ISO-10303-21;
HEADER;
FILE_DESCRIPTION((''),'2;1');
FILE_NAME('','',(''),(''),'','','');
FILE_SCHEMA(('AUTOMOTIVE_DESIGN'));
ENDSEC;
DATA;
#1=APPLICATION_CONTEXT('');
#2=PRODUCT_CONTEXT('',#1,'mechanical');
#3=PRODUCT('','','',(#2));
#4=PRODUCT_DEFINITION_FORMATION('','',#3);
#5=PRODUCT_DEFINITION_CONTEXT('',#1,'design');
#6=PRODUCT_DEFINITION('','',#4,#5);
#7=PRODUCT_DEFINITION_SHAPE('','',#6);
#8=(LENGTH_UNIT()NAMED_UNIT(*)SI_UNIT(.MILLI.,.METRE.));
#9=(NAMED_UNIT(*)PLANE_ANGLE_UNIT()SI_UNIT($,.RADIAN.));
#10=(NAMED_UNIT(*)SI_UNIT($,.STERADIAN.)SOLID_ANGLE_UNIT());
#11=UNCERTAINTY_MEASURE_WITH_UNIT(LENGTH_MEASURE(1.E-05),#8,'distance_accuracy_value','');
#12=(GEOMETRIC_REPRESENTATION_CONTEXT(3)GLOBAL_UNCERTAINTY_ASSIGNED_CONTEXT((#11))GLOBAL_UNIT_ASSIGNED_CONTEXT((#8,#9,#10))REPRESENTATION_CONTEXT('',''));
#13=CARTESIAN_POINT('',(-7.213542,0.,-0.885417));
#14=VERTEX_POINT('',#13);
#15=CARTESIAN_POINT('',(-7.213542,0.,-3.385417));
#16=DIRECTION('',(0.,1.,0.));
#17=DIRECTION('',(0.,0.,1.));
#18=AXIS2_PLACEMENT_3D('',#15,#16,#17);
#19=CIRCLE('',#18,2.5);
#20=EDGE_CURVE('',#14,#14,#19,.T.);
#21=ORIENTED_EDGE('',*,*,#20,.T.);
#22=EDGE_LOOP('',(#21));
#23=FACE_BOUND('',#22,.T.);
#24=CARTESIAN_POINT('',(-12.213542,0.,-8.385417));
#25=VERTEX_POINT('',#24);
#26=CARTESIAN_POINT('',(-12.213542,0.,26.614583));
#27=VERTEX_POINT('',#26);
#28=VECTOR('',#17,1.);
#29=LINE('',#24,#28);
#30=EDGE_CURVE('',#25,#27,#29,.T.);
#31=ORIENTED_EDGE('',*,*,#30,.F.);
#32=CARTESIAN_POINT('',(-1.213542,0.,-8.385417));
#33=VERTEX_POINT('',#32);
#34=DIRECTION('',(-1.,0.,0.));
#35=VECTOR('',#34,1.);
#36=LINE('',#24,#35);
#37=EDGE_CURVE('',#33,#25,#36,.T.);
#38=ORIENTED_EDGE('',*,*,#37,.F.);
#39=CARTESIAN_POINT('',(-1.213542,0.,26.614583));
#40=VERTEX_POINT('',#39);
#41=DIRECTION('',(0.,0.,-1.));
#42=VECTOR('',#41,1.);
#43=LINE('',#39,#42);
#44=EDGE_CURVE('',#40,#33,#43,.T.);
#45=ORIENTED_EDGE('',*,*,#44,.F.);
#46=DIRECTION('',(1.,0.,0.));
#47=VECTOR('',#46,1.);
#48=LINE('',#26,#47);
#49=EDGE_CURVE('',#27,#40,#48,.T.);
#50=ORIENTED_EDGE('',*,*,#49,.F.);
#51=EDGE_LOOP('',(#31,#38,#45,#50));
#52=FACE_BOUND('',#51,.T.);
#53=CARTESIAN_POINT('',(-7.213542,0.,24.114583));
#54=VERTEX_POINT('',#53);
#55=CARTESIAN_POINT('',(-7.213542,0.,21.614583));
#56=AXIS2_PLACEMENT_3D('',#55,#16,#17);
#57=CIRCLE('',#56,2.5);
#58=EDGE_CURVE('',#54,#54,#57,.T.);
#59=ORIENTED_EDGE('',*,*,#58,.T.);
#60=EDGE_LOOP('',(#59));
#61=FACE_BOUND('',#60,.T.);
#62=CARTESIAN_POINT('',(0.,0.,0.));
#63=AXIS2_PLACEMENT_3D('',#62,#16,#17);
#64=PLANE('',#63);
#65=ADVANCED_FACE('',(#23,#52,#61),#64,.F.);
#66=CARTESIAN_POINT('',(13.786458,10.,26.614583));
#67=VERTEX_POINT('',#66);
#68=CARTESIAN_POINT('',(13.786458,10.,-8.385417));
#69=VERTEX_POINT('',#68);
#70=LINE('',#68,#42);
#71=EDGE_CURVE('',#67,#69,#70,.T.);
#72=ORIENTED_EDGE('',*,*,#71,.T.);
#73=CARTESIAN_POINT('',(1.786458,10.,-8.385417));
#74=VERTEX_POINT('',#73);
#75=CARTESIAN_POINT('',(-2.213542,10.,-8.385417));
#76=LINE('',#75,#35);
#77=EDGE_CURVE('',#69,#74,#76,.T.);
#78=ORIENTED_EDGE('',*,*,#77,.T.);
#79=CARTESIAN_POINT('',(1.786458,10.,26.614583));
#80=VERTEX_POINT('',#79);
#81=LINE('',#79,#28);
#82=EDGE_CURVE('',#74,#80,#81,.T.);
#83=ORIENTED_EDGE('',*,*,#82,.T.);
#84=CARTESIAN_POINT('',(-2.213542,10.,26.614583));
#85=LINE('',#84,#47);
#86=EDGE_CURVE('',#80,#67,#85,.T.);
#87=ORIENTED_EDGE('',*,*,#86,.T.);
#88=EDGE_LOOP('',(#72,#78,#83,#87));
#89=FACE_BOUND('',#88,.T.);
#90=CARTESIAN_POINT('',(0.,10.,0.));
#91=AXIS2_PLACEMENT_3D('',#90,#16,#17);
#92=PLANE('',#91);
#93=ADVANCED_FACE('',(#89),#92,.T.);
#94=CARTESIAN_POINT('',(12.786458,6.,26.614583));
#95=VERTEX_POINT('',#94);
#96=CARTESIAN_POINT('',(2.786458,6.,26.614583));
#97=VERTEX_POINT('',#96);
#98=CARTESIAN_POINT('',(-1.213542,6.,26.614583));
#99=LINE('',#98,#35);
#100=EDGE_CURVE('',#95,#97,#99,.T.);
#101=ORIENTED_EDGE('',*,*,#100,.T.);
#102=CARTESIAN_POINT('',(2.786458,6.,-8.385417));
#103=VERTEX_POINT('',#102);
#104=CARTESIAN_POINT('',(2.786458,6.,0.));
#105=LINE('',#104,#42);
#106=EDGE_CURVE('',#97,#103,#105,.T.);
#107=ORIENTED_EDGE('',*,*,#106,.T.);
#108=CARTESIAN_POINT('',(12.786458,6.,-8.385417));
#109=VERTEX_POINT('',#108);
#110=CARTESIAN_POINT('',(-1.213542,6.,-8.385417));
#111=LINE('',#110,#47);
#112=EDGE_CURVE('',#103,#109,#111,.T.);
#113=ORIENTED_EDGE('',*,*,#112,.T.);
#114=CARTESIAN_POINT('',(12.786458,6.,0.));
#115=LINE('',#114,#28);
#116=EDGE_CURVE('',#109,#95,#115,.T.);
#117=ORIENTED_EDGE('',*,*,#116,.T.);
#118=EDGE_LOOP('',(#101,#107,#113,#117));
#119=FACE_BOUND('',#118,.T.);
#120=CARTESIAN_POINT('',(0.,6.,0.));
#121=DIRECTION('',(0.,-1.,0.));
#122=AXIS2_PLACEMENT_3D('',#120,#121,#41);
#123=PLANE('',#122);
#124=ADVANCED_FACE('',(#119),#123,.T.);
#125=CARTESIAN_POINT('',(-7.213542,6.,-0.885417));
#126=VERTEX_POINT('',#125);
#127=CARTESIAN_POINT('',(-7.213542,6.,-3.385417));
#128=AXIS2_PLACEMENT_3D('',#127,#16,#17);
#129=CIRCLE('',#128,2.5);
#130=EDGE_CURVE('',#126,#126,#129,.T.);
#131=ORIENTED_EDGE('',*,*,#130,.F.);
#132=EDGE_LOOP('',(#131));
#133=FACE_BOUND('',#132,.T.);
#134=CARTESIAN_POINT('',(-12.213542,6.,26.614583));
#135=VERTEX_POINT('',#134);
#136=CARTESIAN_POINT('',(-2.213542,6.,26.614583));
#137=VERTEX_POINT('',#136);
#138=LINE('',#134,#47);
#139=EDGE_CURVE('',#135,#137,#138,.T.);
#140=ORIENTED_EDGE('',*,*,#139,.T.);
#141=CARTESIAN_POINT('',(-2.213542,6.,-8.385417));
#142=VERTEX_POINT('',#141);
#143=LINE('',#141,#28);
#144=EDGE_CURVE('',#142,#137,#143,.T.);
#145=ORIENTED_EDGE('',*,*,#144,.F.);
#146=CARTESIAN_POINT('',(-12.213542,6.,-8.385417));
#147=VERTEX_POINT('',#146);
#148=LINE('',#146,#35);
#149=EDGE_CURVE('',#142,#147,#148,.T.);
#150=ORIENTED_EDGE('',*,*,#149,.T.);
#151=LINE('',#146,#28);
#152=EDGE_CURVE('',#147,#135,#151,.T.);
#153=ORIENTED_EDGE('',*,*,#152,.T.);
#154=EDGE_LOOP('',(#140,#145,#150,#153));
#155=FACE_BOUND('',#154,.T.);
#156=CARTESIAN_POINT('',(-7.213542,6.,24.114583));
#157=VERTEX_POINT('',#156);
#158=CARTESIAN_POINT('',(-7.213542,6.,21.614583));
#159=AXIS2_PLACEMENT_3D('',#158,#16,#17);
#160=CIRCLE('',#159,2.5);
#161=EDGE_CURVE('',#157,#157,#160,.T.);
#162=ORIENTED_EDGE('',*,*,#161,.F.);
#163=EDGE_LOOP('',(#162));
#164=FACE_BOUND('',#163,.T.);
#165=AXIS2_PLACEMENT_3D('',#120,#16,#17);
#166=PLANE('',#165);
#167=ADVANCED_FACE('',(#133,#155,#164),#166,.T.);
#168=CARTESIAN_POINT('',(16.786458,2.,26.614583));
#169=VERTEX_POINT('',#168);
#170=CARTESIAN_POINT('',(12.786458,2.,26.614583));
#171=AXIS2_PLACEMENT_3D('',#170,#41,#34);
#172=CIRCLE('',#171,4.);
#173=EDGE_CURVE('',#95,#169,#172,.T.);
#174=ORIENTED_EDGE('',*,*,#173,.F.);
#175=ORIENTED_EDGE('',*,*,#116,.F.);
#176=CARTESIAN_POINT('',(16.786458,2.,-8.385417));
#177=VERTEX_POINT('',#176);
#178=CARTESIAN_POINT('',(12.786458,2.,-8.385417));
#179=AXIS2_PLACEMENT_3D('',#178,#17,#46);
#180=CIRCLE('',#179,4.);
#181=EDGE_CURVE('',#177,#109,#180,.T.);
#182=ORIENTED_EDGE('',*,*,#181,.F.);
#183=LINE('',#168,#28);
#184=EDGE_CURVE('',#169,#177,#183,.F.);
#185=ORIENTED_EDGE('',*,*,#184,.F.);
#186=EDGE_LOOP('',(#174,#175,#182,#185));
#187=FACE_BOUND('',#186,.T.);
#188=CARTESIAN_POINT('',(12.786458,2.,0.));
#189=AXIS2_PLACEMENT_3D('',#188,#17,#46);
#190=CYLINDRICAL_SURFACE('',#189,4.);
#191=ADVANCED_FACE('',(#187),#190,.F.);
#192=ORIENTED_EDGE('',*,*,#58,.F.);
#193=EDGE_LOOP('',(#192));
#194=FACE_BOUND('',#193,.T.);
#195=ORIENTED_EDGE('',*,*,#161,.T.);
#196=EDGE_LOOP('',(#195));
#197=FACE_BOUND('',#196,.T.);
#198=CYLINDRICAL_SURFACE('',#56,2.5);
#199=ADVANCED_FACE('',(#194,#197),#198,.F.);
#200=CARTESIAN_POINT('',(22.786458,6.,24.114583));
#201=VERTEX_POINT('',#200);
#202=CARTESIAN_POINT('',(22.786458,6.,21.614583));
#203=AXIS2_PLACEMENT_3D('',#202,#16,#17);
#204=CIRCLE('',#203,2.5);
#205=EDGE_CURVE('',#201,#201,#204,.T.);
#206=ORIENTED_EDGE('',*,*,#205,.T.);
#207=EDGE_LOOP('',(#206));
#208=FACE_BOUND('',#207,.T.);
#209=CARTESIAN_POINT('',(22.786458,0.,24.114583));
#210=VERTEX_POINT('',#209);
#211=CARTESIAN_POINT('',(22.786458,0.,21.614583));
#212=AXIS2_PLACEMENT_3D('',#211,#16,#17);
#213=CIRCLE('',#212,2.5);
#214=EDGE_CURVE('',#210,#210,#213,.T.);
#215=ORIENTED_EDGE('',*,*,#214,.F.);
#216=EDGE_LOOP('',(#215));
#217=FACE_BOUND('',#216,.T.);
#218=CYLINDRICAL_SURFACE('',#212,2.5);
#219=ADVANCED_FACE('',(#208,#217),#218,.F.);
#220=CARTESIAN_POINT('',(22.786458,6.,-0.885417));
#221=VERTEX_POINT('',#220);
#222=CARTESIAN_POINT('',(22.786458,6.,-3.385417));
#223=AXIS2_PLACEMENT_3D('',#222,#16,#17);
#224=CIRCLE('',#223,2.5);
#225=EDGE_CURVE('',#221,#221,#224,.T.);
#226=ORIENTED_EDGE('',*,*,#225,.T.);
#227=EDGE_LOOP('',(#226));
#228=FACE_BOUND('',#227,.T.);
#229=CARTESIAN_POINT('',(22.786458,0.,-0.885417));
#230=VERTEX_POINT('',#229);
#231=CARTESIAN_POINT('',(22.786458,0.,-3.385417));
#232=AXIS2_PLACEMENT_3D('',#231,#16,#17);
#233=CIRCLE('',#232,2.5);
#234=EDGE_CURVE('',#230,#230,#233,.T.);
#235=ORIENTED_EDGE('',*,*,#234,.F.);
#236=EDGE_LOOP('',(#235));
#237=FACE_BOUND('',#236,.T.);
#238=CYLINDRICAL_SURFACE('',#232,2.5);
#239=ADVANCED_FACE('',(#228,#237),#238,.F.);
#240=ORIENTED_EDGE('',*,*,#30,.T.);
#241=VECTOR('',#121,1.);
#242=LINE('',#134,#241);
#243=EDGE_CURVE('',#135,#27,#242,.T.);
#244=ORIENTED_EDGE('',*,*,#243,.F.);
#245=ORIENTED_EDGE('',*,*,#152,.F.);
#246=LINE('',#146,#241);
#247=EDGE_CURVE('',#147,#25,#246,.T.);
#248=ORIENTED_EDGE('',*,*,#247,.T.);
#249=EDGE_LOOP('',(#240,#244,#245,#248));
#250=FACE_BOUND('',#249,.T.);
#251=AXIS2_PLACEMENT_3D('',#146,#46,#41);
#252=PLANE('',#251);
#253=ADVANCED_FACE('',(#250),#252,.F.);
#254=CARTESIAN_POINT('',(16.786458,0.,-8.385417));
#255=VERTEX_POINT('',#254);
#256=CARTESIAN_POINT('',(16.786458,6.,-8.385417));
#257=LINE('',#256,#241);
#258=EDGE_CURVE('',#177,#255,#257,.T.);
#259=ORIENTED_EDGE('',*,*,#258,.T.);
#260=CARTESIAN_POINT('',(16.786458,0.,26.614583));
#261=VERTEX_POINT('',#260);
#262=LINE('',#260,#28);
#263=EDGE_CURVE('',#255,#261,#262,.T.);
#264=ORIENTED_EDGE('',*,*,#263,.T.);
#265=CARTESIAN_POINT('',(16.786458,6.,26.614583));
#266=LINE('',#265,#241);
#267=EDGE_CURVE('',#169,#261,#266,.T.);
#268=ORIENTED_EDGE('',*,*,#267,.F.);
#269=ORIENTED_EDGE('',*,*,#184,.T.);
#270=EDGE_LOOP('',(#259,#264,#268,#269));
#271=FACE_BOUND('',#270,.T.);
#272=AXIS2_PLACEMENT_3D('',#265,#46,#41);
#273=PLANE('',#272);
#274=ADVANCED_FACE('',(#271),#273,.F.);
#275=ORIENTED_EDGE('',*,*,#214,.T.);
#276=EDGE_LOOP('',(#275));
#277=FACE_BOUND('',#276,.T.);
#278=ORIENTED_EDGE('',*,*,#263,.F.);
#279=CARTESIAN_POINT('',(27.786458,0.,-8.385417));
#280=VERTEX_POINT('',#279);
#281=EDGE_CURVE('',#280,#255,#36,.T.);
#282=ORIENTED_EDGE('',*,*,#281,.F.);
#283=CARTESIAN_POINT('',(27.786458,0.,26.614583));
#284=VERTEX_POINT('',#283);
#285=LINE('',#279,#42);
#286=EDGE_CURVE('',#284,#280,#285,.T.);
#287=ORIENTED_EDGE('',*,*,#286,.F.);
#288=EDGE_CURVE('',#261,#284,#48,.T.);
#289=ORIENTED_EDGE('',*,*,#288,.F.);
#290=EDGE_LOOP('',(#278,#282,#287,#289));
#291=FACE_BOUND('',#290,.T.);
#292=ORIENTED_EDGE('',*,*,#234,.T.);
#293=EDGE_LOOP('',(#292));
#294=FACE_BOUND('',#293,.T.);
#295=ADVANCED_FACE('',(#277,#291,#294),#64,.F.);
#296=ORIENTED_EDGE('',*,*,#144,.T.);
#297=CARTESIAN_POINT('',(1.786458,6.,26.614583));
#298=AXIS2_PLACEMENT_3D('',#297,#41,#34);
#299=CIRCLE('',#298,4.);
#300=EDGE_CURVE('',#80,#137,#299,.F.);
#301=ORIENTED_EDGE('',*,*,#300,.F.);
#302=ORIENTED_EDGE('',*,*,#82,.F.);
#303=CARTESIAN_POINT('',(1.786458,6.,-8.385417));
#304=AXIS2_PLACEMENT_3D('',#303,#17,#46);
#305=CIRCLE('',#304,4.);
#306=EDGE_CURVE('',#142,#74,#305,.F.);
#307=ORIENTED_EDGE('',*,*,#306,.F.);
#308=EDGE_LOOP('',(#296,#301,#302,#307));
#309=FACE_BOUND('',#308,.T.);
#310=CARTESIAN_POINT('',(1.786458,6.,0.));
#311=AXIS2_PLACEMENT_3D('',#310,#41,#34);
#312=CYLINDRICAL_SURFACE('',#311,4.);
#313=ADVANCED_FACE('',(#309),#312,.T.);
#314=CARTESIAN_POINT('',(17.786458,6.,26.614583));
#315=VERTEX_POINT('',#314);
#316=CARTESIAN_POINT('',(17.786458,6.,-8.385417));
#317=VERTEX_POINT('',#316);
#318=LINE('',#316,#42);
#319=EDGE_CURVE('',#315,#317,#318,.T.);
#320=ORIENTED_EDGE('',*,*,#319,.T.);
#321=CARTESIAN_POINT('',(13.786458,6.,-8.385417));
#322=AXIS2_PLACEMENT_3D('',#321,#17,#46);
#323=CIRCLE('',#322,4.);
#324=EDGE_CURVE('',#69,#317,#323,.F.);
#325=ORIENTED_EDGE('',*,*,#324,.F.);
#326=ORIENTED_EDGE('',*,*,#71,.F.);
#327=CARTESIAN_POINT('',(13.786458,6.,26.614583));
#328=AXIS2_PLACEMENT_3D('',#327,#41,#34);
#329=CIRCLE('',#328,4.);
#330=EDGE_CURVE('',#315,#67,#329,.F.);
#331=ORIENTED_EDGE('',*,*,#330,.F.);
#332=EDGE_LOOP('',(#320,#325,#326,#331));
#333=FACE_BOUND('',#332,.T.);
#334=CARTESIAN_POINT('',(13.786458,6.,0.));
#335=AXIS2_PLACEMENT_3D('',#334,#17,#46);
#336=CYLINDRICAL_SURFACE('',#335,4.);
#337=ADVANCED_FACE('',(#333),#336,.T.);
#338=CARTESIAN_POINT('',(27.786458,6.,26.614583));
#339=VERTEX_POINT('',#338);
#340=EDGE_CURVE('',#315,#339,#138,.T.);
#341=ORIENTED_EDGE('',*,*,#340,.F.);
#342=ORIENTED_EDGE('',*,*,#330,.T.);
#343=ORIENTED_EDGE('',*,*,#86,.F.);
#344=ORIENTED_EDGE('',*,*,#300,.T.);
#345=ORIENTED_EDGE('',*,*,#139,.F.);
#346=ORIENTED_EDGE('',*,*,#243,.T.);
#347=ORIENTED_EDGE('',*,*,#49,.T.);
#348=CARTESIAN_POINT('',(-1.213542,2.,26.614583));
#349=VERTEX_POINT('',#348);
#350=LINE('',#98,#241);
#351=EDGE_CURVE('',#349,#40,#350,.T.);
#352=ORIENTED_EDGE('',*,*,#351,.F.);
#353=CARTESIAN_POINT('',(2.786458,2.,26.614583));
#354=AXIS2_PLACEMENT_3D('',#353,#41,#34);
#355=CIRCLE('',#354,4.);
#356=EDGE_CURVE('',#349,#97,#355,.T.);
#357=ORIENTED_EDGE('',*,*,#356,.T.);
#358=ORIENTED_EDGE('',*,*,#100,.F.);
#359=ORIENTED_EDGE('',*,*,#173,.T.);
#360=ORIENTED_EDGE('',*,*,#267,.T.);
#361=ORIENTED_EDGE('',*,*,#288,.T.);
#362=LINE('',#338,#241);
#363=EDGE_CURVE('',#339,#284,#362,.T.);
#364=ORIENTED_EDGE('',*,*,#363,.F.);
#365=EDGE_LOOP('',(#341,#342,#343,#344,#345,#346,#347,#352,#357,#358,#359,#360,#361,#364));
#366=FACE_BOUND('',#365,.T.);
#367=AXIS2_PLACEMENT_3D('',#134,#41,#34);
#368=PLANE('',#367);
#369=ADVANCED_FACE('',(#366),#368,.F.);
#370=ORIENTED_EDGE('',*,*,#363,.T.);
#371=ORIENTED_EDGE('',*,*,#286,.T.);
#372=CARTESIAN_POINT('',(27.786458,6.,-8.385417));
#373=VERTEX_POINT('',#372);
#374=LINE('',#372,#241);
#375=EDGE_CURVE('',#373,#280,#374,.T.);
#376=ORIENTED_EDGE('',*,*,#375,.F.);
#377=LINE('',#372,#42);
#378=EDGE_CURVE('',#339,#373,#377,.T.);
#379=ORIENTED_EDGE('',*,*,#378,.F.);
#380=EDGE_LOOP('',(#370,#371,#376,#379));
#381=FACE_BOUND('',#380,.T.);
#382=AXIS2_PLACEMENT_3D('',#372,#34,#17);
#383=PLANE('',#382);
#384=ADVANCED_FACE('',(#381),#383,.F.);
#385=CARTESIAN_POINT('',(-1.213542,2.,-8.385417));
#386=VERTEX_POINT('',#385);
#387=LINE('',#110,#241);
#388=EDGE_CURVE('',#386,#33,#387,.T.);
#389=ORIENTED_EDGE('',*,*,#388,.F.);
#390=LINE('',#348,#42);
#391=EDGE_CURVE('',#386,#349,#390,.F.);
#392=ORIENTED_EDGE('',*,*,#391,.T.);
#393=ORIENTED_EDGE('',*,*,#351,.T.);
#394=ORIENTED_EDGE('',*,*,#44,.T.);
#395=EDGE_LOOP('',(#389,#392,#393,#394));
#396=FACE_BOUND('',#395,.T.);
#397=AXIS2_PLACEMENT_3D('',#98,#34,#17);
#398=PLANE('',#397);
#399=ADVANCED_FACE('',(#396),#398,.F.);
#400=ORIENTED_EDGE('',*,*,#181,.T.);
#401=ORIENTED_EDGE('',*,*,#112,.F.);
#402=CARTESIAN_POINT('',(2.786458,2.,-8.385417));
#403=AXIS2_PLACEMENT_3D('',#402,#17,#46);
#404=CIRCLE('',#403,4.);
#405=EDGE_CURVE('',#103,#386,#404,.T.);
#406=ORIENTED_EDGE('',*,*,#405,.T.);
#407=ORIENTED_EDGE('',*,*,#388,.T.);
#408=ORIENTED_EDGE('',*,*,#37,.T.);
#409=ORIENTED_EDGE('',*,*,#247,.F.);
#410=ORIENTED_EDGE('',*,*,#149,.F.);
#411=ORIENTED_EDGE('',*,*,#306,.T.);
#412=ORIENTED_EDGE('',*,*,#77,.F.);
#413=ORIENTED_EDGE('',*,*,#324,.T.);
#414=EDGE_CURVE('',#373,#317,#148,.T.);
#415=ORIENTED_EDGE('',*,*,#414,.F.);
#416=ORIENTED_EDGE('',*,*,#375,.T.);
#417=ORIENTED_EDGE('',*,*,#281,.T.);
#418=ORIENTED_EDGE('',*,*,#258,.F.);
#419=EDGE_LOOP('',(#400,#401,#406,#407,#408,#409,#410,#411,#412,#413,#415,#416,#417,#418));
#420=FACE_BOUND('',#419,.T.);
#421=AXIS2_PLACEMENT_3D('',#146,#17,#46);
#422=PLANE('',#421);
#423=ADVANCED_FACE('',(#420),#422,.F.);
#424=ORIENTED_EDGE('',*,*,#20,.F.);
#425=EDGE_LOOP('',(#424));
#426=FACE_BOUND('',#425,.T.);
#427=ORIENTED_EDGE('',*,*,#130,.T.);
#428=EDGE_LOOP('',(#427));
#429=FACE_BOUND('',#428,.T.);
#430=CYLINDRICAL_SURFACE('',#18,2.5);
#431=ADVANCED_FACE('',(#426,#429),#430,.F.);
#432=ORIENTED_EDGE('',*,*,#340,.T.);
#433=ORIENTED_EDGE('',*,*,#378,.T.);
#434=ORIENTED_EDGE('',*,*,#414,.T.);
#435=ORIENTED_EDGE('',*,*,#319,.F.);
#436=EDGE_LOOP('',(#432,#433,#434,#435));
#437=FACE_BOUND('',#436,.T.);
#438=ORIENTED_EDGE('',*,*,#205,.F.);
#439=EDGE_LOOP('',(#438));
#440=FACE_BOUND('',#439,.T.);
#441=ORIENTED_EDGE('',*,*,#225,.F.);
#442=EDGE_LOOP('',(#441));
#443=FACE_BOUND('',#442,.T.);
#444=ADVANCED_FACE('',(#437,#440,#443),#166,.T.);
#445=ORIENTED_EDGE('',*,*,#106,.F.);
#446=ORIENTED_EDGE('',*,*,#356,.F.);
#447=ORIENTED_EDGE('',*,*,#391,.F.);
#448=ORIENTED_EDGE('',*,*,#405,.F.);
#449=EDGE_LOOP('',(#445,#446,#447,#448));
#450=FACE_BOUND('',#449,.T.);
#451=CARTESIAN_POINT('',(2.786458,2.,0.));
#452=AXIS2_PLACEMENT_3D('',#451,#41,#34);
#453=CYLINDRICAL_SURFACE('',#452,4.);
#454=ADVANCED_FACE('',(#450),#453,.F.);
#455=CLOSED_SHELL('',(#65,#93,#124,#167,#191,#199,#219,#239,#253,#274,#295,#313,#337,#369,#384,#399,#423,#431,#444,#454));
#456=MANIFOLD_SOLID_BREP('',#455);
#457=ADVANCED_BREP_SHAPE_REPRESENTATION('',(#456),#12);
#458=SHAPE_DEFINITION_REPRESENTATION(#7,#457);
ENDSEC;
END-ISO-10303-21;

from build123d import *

# Parameters (mm, degrees)
SKETCH1_W           = 40
SKETCH1_H           = 35
BOSS_EXTRUDE1_DEPTH = 6
SKETCH2_R           = 2.5
CUT_EXTRUDE1_DEPTH  = 6
SKETCH3_W           = 20
SKETCH3_H           = 35
BOSS_EXTRUDE2_DEPTH = 4
SKETCH4_W           = 18
SKETCH4_H           = 35
CUT_EXTRUDE2_DEPTH  = 6
FILLET2_R           = 4
FILLET3_R           = 4


with BuildPart() as part:
    # Sketch1 → Boss-Extrude1 (new body)
    with BuildSketch(Plane(origin=(0, 0, 0), x_dir=(1, 0, 0), z_dir=(0, 1, 0))):
        with Locations((7.786458333, -9.114583333)):
            Rectangle(SKETCH1_W, SKETCH1_H)
    extrude(amount=BOSS_EXTRUDE1_DEPTH)

    # Sketch2 → Cut-Extrude1 (cut)
    with BuildSketch(Plane(origin=(0, 6, 0), x_dir=(1, 0, 0), z_dir=(0, 1, 0))):
        with Locations(Location((-7.213541667, -21.614583333, 0), (0, 0, 270))):
            Circle(SKETCH2_R)
        with Locations(Location((22.786458333, 3.385416667, 0), (0, 0, 270))):
            Circle(SKETCH2_R)
        with Locations(Location((22.786458333, -21.614583333, 0), (0, 0, 270))):
            Circle(SKETCH2_R)
        with Locations(Location((-7.213541667, 3.385416667, 0), (0, 0, 270))):
            Circle(SKETCH2_R)
    extrude(amount=-CUT_EXTRUDE1_DEPTH, mode=Mode.SUBTRACT)

    # Sketch3 → Boss-Extrude2 (add)
    with BuildSketch(Plane(origin=(0, 6, 0), x_dir=(1, 0, 0), z_dir=(0, 1, 0))):
        with Locations((7.786458333, -9.114583333)):
            Rectangle(SKETCH3_W, SKETCH3_H)
    extrude(amount=BOSS_EXTRUDE2_DEPTH)

    # Sketch4 → Cut-Extrude2 (cut)
    with BuildSketch(Plane.XZ):
        with Locations((7.786458333, 9.114583333)):
            Rectangle(SKETCH4_W, SKETCH4_H)
    extrude(amount=-CUT_EXTRUDE2_DEPTH, mode=Mode.SUBTRACT)

    # Fillet2
    fillet2_edges = [part.edges().sort_by_distance(p)[0] for p in [
        (-1.213541667, 6, 9.114583333),
        (16.786458333, 6, 9.114583333),
    ]]
    fillet(fillet2_edges, radius=FILLET2_R)

    # Fillet3
    fillet3_edges = [part.edges().sort_by_distance(p)[0] for p in [
        (17.786458333, 10, 9.114583333),
        (-2.213541667, 10, 9.114583333),
    ]]
    fillet(fillet3_edges, radius=FILLET3_R - 0.0001)  # a hair under: the kernel refuses the full size


solid = part.part
